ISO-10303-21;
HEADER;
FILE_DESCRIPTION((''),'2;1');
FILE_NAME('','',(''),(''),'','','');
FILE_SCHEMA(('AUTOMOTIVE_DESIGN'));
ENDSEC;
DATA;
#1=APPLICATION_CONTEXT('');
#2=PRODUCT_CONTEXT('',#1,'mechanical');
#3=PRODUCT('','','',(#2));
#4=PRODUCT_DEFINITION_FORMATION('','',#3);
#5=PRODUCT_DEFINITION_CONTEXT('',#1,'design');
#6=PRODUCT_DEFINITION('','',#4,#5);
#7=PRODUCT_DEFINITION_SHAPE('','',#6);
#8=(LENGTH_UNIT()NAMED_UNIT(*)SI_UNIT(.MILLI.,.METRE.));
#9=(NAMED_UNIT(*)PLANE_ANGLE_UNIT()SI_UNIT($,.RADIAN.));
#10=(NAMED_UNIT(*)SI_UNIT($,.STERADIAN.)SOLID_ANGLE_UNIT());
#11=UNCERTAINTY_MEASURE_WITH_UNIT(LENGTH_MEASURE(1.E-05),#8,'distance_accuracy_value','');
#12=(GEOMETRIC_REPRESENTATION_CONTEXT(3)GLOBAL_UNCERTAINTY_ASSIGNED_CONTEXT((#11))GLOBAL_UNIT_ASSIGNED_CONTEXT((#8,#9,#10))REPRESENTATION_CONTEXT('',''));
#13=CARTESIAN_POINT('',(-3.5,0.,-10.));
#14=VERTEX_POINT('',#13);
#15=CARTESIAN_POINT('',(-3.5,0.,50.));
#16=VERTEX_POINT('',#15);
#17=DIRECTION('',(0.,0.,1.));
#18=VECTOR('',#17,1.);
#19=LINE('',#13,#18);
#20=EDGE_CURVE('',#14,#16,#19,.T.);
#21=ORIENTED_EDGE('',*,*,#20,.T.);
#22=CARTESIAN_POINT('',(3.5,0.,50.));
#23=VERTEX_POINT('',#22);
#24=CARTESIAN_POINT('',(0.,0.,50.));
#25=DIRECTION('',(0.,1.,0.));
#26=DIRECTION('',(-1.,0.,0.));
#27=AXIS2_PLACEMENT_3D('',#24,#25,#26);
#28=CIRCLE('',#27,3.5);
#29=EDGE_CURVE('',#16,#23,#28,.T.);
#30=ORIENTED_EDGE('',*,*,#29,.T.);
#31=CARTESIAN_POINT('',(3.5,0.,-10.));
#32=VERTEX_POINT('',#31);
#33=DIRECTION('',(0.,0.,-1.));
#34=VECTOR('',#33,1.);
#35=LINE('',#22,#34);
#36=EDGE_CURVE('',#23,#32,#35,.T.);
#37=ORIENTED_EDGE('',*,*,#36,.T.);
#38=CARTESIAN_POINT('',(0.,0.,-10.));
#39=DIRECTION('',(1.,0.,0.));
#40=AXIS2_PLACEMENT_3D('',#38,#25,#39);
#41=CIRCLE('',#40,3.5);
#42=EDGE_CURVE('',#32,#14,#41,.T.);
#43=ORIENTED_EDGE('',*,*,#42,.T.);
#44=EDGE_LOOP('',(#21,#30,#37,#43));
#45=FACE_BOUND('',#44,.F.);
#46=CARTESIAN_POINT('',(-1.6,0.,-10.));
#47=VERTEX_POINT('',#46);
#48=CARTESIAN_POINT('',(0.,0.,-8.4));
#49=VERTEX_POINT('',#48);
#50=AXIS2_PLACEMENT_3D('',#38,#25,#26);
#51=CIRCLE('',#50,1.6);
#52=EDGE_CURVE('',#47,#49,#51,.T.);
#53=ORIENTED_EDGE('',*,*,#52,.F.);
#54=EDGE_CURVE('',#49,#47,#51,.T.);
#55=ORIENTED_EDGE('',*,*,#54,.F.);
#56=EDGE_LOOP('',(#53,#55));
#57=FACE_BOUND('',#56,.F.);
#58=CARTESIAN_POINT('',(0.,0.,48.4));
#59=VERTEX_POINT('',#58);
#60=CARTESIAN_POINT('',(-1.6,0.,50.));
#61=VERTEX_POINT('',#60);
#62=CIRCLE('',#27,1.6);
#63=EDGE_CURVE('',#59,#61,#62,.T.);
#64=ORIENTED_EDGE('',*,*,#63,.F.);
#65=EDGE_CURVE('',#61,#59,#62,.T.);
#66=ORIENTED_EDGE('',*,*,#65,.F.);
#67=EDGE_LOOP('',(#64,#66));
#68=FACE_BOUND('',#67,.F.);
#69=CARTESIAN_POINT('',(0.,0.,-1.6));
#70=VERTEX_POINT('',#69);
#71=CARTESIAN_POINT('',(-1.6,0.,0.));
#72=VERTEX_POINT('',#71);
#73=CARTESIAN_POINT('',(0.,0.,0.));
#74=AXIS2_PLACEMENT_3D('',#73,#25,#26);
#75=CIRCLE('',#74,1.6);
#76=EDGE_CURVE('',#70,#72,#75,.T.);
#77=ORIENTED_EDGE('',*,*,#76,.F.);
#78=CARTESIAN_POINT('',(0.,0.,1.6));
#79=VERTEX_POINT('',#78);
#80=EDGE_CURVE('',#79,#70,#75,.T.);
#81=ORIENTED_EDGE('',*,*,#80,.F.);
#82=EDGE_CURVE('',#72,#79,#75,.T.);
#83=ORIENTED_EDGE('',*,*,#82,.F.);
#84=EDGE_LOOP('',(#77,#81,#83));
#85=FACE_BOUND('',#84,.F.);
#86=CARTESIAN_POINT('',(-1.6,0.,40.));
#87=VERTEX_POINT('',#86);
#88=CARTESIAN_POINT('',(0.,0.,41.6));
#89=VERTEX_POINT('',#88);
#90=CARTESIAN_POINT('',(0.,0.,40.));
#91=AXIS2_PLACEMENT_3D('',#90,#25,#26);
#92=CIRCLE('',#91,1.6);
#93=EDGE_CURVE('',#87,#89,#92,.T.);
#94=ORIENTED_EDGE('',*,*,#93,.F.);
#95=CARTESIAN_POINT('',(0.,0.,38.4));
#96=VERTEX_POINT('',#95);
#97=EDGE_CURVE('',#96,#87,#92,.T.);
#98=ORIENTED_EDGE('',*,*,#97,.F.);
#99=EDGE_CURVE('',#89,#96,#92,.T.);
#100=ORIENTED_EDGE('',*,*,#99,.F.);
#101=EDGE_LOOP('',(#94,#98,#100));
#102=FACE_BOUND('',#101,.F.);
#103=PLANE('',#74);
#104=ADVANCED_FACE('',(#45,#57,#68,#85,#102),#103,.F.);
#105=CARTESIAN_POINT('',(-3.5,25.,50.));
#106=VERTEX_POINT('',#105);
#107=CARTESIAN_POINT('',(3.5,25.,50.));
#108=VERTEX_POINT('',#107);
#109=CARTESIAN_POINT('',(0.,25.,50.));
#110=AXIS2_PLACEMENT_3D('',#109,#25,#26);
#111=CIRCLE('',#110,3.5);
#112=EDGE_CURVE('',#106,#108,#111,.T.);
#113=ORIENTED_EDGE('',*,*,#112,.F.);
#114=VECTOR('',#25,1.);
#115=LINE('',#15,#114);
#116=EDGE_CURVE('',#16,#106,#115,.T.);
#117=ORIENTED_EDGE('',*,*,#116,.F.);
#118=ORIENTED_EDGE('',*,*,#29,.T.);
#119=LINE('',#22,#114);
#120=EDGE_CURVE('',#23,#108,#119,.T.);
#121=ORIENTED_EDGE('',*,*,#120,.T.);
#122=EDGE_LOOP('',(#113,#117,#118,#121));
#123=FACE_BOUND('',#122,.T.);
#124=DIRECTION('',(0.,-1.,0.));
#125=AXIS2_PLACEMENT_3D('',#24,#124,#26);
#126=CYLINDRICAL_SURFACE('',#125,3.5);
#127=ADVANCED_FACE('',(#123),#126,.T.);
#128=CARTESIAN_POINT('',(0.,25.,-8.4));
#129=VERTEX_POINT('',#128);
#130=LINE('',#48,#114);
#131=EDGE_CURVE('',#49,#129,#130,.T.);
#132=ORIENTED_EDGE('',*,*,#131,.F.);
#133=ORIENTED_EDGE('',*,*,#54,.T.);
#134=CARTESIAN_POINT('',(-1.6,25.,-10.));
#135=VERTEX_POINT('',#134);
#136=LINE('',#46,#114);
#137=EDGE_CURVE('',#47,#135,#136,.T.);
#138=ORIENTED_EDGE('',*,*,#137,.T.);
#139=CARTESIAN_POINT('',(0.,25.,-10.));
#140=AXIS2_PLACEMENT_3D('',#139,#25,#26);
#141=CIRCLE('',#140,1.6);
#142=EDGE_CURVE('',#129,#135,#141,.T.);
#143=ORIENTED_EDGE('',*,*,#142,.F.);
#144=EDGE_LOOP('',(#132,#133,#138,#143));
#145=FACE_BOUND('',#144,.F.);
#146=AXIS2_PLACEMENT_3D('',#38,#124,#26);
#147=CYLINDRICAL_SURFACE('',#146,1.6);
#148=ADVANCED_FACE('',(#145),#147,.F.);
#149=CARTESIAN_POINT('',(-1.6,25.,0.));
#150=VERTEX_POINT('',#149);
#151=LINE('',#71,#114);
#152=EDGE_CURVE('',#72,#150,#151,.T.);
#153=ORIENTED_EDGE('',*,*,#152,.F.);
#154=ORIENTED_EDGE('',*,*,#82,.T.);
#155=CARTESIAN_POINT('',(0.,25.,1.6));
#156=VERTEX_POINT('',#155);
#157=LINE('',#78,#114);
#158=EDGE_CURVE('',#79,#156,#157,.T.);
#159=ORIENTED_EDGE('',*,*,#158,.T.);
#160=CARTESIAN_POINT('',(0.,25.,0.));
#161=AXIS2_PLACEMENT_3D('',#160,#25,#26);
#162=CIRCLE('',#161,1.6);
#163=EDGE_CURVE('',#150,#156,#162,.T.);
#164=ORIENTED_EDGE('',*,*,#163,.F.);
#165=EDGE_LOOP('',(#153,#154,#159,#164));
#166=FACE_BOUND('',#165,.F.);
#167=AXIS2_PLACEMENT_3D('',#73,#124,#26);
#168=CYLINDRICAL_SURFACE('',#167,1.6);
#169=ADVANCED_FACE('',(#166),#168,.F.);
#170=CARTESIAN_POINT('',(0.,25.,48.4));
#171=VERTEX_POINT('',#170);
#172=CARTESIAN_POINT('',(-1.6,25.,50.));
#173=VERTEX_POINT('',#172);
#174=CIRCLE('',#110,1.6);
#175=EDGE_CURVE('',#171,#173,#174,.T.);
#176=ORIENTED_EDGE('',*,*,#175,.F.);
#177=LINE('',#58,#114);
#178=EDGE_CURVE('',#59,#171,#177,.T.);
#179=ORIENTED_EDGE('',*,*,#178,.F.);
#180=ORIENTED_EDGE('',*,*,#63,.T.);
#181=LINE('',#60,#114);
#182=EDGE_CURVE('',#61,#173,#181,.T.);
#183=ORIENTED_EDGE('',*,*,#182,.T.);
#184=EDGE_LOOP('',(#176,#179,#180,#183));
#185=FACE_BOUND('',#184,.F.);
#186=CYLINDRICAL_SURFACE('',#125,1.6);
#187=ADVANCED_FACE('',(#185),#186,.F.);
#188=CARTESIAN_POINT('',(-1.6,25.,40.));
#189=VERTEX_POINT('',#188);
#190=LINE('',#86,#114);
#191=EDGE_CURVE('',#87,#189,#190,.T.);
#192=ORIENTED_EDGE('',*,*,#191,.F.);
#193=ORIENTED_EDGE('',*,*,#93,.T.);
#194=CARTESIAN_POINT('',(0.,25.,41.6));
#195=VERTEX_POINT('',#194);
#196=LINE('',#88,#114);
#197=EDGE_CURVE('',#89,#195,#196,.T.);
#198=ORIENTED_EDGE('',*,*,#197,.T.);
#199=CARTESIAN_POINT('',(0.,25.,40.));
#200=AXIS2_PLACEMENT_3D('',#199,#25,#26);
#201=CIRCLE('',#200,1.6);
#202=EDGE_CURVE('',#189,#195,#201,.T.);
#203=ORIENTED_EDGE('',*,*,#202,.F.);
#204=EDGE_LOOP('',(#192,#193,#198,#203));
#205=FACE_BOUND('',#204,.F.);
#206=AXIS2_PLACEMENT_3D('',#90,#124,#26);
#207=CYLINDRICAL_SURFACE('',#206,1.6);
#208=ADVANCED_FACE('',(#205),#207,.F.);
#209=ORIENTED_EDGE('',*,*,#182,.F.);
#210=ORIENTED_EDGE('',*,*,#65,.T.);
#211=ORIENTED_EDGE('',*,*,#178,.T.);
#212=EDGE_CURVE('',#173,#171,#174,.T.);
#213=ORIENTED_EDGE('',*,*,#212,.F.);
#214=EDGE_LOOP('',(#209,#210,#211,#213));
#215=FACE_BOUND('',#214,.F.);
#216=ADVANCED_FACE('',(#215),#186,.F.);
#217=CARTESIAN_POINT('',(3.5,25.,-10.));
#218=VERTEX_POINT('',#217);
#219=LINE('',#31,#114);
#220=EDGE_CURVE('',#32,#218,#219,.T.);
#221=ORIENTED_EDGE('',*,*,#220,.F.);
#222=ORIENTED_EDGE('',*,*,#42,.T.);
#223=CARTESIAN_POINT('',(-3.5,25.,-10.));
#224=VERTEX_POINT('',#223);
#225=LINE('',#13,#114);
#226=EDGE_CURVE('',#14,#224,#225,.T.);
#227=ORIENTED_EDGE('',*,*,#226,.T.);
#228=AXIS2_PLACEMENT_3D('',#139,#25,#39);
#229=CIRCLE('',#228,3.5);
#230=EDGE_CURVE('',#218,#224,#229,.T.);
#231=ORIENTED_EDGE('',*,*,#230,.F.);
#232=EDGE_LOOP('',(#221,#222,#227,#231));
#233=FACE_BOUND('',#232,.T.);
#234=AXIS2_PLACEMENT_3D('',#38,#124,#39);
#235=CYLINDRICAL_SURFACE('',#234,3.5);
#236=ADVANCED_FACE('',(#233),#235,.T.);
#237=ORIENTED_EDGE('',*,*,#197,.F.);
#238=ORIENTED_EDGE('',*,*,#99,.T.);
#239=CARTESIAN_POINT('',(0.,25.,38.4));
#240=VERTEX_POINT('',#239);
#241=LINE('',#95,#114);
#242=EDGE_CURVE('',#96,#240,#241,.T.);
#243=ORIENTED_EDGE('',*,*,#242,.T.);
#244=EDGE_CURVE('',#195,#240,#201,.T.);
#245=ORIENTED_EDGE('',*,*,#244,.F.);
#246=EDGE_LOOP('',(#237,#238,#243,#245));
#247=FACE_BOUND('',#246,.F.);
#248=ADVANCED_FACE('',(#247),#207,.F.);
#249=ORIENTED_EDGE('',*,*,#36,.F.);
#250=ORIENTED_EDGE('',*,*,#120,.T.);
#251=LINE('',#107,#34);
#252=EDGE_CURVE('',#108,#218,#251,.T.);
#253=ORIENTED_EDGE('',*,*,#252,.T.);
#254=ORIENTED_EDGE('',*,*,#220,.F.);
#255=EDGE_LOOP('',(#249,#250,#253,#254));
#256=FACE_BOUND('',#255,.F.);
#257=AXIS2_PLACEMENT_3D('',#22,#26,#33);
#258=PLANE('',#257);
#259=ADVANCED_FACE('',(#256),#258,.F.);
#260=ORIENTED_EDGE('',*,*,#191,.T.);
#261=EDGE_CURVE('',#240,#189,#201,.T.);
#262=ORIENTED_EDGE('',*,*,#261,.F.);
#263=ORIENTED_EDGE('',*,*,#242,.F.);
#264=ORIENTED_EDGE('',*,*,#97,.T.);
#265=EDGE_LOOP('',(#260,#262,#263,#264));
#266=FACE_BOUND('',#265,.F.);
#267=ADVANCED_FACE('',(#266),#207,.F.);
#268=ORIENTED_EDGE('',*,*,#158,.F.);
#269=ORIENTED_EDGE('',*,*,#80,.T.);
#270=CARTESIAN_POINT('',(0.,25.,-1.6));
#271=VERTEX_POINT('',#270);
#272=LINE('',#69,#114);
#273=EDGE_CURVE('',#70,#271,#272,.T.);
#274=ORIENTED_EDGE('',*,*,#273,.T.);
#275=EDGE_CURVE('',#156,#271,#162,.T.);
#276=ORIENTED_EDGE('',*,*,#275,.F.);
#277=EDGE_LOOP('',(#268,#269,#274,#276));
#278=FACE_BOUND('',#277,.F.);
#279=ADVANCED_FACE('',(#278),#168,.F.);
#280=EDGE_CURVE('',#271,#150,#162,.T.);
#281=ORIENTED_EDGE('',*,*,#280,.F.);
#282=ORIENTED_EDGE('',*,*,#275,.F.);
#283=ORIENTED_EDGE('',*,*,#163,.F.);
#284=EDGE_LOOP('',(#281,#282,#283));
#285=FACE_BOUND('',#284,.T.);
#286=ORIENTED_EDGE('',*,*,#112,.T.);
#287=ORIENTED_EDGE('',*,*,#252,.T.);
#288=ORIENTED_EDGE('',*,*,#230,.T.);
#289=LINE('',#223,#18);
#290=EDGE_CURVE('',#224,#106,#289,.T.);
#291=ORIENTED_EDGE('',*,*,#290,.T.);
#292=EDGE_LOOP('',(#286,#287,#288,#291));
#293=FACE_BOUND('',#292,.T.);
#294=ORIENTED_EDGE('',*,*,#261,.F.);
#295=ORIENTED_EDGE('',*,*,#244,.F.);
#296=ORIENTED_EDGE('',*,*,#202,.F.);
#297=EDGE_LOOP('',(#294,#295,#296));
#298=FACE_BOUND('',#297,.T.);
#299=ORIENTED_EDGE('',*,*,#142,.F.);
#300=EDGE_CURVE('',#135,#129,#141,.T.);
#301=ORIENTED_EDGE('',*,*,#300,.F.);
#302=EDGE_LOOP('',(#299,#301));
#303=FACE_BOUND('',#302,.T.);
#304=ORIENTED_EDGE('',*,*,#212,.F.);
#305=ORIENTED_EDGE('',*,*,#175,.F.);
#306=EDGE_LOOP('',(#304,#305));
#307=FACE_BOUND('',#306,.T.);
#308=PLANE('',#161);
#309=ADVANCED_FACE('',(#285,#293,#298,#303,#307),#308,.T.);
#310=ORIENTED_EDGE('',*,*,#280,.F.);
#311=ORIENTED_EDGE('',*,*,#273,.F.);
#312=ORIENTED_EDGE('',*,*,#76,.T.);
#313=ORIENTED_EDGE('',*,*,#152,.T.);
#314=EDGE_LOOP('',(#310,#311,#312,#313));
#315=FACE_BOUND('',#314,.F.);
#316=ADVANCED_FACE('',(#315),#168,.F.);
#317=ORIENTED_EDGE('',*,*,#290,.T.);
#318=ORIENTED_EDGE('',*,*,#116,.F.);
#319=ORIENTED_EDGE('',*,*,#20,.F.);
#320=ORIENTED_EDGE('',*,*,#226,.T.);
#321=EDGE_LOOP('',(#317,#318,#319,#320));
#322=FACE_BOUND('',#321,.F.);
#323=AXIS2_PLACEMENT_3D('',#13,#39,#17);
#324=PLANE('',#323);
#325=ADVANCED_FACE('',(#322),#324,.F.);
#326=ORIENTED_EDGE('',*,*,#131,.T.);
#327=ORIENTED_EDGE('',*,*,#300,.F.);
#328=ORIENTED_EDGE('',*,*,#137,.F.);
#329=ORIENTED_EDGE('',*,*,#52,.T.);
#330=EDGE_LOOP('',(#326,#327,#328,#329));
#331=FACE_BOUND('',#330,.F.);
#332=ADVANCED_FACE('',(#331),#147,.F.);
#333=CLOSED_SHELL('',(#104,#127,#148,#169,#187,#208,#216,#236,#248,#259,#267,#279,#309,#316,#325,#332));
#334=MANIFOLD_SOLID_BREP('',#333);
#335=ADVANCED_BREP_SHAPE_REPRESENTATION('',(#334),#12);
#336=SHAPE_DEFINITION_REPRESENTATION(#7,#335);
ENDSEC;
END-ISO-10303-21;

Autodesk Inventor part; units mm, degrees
ref_plane "YZ Plane" through (0, 0, 0) normal (1, 0, 0) x (0, 1, 0)
ref_plane "XZ Plane" through (0, 0, 0) normal (0, 1, 0) x (-1, 0, 0)
ref_plane "XY Plane" through (0, 0, 0) normal (0, 0, 1) x (1, 0, 0)
sketch "Sketch1" plane through (0, 0, 0) normal (0, 1, 0) x (-1, 0, 0)
  circle A0 centre (0, 0) radius 1.6
  line L0 (0, 0) -> (0, -10)
  circle A1 centre (0, -10) radius 1.6
  line L1 (0, 0) -> (0, 40)
  circle A2 centre (0, 40) radius 1.6
  line L2 (0, 40) -> (0, 50)
  circle A3 centre (0, 50) radius 1.6
  line L3 (0, 50) -> (0, -10) construction
  line L4 (-3.5, 50) -> (-3.5, -10)
  line L5 (3.5, -10) -> (3.5, 50)
  arc A4 (3.5, 50) -> (-3.5, 50) centre (0, 50) ccw
  arc A5 (-3.5, -10) -> (3.5, -10) centre (0, -10) ccw
  point P0 (0, 20)
  dimension "d0" = 3.2
  dimension "d1" = 10
  dimension "d2" = 3.2
  dimension "d3" = 40
  dimension "d4" = 3.2
  dimension "d5" = 10
  dimension "d6" = 3.2
  dimension "d7" = 7
extrude "Extrusion1" add sketch "Sketch1" along normal blind 25
properties part number "cover_wall_1"
